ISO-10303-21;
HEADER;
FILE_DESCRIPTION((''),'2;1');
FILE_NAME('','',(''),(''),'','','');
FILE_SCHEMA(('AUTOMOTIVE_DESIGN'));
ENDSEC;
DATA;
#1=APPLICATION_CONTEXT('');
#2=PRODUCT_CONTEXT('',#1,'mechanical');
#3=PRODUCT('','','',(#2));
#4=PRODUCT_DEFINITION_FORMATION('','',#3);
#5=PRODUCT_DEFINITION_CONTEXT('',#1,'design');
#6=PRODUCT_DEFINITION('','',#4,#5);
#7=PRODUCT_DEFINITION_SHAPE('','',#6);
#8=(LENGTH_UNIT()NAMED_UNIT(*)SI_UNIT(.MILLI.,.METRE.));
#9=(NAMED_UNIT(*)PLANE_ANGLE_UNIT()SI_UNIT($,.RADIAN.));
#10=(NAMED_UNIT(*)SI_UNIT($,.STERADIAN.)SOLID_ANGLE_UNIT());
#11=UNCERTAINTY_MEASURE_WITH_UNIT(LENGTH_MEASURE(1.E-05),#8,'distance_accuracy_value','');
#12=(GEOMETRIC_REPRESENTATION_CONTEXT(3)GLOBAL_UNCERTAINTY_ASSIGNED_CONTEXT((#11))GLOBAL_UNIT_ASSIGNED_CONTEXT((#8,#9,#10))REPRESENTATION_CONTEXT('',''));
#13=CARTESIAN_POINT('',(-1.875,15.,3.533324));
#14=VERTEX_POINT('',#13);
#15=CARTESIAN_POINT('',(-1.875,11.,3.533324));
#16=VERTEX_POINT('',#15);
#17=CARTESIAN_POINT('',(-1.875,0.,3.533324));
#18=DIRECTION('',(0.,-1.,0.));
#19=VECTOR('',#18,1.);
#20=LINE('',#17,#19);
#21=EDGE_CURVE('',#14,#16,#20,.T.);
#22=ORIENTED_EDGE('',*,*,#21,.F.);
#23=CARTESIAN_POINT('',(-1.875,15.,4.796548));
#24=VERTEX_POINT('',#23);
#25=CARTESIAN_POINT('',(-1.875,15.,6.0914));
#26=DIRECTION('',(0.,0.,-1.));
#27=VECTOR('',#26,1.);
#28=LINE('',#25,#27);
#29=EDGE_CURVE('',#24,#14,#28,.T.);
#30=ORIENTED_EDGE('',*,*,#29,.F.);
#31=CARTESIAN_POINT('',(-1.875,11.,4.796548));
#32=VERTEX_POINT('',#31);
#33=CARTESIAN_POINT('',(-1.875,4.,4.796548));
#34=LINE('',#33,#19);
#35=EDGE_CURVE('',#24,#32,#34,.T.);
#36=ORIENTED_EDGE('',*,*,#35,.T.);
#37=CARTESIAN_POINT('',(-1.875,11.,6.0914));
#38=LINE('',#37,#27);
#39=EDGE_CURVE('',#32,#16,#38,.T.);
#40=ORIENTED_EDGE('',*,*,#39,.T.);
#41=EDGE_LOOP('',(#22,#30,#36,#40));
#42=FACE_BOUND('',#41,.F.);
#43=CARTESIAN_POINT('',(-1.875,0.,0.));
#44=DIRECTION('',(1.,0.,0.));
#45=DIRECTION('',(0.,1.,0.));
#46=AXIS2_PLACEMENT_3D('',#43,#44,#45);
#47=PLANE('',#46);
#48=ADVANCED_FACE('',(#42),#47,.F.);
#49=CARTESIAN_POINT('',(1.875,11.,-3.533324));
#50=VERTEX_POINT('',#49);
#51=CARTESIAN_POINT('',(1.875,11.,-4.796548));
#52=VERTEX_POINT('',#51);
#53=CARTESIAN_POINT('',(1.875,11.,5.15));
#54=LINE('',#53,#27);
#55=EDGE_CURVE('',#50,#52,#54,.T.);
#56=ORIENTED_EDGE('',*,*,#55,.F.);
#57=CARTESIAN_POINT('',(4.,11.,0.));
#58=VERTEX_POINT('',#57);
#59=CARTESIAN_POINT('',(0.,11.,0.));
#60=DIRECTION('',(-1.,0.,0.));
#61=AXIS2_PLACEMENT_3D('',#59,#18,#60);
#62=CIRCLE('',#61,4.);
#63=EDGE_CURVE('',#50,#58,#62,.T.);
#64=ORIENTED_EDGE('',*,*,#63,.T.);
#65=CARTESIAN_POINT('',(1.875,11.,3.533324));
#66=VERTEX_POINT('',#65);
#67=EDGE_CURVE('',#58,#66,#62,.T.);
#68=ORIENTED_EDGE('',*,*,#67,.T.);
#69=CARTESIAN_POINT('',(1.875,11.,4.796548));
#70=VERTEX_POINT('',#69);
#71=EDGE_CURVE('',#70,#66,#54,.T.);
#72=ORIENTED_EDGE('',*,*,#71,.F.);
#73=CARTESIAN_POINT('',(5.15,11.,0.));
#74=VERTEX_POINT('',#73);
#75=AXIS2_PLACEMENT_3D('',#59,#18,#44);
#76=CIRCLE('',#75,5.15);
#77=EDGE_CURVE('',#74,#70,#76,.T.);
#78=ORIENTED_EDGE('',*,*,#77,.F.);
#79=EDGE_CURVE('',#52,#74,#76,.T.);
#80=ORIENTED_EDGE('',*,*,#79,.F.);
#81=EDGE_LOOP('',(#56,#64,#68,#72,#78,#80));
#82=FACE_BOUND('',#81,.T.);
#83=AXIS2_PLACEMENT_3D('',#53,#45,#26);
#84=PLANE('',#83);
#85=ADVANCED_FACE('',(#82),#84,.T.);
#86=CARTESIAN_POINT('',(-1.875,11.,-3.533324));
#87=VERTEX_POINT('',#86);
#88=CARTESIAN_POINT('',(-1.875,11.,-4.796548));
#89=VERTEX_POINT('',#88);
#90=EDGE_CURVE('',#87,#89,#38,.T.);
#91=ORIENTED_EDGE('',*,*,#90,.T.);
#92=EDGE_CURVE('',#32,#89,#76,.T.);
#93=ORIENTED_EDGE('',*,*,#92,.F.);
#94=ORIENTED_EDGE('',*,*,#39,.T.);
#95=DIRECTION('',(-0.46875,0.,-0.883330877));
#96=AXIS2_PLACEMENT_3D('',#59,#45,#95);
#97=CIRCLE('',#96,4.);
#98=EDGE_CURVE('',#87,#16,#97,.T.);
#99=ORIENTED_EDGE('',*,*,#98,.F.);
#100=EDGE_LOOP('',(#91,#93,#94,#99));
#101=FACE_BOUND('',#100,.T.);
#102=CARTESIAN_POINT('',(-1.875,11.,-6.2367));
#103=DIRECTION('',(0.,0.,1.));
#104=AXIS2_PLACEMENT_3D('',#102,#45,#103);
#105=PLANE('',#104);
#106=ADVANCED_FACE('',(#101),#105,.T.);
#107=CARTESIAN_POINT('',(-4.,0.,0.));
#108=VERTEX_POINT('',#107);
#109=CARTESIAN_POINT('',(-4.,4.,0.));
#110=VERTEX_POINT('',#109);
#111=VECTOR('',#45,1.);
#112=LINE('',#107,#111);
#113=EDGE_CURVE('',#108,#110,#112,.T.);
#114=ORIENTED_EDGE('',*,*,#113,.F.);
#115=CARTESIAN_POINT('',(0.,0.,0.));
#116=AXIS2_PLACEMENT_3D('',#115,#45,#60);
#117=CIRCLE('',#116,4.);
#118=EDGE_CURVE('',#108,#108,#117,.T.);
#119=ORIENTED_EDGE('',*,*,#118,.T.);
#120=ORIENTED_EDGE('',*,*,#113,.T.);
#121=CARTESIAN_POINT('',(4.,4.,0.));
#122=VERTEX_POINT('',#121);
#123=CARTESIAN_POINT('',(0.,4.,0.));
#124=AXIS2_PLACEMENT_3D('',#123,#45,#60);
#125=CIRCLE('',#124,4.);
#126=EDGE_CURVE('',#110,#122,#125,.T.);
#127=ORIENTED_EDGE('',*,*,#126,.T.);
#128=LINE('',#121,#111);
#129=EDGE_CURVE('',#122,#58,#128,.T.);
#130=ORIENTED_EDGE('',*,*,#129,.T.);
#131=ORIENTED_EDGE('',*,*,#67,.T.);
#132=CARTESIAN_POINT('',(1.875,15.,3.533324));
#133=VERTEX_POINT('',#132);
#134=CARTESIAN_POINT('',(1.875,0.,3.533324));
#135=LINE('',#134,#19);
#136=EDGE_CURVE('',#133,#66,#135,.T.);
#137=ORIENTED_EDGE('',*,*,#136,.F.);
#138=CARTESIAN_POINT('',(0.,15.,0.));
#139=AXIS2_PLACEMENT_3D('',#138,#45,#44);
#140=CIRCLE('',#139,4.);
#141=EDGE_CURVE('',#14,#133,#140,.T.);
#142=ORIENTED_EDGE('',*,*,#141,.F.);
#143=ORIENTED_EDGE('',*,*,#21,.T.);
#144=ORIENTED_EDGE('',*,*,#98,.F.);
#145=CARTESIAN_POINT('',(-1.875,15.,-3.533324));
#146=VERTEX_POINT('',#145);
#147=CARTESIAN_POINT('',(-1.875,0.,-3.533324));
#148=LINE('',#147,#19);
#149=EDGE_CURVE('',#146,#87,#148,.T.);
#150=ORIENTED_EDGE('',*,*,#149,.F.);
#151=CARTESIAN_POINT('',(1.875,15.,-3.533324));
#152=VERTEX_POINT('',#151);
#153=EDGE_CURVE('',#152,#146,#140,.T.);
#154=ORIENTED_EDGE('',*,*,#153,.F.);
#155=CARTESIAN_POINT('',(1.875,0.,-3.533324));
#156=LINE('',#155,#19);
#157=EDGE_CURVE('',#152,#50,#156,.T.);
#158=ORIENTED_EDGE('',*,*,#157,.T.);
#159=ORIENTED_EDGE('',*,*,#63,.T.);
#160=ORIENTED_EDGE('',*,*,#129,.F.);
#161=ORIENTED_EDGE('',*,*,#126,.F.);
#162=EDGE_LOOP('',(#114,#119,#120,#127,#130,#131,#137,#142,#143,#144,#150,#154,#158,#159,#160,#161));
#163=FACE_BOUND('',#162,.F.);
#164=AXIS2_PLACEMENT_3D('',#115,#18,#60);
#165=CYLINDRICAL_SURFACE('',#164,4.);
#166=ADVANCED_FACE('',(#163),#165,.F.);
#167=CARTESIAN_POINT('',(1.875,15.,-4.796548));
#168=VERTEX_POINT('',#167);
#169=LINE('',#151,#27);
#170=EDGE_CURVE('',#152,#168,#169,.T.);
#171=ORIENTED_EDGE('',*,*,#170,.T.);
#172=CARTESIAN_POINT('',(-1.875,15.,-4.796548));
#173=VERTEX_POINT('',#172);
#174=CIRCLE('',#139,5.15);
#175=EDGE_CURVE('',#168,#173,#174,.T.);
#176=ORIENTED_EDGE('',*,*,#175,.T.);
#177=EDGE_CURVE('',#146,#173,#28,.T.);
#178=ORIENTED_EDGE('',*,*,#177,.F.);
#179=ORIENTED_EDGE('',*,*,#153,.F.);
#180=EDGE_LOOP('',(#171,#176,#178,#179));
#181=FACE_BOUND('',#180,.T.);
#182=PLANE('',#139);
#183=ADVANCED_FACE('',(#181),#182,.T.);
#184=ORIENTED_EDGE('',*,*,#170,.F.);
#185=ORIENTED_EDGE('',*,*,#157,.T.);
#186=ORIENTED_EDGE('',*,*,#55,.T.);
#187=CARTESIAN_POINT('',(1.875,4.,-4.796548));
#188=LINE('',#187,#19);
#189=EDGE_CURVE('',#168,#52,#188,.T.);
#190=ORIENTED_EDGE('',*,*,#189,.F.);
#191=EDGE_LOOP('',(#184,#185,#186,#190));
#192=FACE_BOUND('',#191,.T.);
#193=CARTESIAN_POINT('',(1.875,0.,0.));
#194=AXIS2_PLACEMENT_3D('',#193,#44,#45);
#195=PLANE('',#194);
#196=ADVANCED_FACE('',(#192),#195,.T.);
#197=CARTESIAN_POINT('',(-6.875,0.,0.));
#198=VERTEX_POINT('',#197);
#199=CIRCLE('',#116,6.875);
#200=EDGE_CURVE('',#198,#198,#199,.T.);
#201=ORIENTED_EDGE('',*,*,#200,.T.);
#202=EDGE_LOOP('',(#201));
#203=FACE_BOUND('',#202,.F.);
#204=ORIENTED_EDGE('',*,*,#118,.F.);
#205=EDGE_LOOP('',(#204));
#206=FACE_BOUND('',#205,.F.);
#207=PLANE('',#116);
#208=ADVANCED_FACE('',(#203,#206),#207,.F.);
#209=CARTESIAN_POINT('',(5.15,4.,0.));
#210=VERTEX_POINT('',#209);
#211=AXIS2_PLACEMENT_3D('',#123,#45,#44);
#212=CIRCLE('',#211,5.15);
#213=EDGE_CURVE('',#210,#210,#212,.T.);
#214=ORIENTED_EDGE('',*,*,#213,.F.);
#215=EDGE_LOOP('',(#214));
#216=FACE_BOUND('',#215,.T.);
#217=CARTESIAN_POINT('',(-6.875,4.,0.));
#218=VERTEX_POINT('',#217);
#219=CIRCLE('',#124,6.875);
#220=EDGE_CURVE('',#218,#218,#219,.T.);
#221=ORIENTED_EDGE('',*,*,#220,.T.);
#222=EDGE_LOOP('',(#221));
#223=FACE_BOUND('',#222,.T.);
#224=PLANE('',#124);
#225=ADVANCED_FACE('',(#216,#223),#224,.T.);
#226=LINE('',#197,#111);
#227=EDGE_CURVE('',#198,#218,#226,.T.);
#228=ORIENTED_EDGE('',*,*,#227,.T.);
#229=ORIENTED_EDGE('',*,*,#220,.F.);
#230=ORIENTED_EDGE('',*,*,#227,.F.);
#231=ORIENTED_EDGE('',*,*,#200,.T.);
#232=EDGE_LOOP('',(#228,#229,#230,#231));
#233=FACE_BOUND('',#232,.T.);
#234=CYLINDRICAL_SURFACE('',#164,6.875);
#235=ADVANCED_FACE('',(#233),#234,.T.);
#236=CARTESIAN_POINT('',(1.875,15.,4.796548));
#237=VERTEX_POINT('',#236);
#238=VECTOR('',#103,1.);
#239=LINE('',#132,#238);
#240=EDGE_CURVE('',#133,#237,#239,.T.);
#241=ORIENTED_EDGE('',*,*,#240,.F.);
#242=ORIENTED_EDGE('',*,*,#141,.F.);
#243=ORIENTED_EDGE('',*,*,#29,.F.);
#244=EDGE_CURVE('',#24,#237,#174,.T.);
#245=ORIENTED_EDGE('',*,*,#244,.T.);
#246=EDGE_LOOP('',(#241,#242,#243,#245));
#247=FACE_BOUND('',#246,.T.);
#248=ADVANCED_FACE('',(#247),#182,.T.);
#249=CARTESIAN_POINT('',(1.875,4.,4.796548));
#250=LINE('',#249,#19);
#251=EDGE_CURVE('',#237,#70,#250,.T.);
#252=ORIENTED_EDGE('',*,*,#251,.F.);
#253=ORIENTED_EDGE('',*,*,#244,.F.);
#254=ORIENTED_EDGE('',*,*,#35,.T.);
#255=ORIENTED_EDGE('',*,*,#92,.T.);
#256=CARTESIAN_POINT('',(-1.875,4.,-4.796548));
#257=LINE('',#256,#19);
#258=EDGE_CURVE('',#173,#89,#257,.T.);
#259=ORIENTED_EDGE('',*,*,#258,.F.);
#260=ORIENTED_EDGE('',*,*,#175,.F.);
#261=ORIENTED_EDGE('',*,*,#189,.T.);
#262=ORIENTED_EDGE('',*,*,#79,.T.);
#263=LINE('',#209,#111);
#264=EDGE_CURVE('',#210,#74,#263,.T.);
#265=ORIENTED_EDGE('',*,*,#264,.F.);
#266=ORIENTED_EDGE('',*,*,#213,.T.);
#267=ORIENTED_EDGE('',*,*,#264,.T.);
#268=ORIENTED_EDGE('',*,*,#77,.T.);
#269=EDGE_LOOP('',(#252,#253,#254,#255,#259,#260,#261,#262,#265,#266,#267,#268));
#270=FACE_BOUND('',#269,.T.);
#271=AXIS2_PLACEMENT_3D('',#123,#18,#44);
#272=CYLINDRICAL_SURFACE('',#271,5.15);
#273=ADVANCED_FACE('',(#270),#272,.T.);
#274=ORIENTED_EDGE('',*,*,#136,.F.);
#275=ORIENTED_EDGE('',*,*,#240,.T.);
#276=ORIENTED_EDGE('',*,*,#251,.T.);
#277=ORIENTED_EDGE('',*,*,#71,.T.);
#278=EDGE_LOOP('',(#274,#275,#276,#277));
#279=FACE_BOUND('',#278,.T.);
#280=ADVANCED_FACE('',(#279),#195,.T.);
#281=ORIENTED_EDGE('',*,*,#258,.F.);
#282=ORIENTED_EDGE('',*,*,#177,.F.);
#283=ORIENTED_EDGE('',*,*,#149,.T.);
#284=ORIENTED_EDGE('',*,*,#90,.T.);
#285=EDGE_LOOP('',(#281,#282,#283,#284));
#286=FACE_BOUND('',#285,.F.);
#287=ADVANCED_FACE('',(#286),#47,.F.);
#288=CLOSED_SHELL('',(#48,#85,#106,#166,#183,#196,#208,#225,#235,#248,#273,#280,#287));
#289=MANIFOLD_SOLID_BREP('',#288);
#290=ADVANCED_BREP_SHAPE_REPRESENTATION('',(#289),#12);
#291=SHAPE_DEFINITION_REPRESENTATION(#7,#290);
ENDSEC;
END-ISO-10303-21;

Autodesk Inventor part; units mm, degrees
ref_plane "XZ Plane" through (0, 0, 0) normal (0, 1, 0) x (-1, 0, 0)
sketch "Szkic1" plane through (0, 0, 0) normal (0, 1, 0) x (-1, 0, 0)
  circle A0 centre (0, 0) radius 6.875
  circle A1 centre (0, 0) radius 4
  dimension "d0" = 13.75
  dimension "d1" = 8
extrude "Wyciągnięcie proste1" add sketch "Szkic1" along normal blind 4
sketch "Szkic2" plane through (0, 4, 0) normal (0, 1, 0) x (1, 0, 0)
  circle A0 centre (0, 0) radius 5.15
  circle A1 centre (0, 0) radius 4 projected
  dimension "d4" = 10.3
extrude "Wyciągnięcie proste2" add sketch "Szkic2" along normal blind 11
ref_plane "Płaszczyzna konstrukcyjna1" through (1.875, 0, 0) normal (1, 0, 0) x (0, 1, 0)
sketch "Szkic3" plane through (1.875, 0, 0) normal (1, 0, 0) x (0, 1, 0)
  line L0 (15, 4) -> (15, -4) projected
  line L1 (0, -4) -> (0, 4) projected
  line L2 (4, 5.15) -> (15, 5.15) projected
  line L3 (4, -5.15) -> (15, -5.15) projected
  line L4 (15, -5.15) -> (15, 5.15) projected
  line L5 (15, 5.15) -> (11, 5.15)
  line L6 (11, 5.15) -> (11, -5.15)
  line L7 (11, -5.15) -> (15, -5.15)
  line L8 (15, -5.15) -> (15, 5.15)
  point P0 (0, 0)
  dimension "d8" = 4
extrude "Wyciągnięcie proste3" cut sketch "Szkic3" along normal through all
ref_plane "Płaszczyzna konstrukcyjna2" through (-1.875, 0, 0) normal (1, 0, 0) x (0, 1, 0)
sketch "Szkic4" plane through (-1.875, 0, 0) normal (1, 0, 0) x (0, 1, 0)
  line L0 (4, 5.15) -> (4, -5.15) projected
  line L1 (15, -4.7965) -> (11, -4.7965) projected
  line L2 (11, -4.7965) -> (11, 4.7965) projected
  line L3 (11, 4.7965) -> (15, 4.7965) projected
  line L4 (15, -4.7965) -> (15, 4.7965) projected
  line L5 (4, 5.15) -> (15, 5.15) projected
  line L6 (15, -6.2367) -> (11, -6.2367)
  line L7 (11, -6.2367) -> (11, 6.0914)
  line L8 (11, 6.0914) -> (15, 6.0914)
  line L9 (15, 6.0914) -> (15, -6.2367)
  point P0 (0, 0)
extrude "Wyciągnięcie proste4" cut sketch "Szkic4" against normal through all
properties part number "napinacz nakretki tr8"
